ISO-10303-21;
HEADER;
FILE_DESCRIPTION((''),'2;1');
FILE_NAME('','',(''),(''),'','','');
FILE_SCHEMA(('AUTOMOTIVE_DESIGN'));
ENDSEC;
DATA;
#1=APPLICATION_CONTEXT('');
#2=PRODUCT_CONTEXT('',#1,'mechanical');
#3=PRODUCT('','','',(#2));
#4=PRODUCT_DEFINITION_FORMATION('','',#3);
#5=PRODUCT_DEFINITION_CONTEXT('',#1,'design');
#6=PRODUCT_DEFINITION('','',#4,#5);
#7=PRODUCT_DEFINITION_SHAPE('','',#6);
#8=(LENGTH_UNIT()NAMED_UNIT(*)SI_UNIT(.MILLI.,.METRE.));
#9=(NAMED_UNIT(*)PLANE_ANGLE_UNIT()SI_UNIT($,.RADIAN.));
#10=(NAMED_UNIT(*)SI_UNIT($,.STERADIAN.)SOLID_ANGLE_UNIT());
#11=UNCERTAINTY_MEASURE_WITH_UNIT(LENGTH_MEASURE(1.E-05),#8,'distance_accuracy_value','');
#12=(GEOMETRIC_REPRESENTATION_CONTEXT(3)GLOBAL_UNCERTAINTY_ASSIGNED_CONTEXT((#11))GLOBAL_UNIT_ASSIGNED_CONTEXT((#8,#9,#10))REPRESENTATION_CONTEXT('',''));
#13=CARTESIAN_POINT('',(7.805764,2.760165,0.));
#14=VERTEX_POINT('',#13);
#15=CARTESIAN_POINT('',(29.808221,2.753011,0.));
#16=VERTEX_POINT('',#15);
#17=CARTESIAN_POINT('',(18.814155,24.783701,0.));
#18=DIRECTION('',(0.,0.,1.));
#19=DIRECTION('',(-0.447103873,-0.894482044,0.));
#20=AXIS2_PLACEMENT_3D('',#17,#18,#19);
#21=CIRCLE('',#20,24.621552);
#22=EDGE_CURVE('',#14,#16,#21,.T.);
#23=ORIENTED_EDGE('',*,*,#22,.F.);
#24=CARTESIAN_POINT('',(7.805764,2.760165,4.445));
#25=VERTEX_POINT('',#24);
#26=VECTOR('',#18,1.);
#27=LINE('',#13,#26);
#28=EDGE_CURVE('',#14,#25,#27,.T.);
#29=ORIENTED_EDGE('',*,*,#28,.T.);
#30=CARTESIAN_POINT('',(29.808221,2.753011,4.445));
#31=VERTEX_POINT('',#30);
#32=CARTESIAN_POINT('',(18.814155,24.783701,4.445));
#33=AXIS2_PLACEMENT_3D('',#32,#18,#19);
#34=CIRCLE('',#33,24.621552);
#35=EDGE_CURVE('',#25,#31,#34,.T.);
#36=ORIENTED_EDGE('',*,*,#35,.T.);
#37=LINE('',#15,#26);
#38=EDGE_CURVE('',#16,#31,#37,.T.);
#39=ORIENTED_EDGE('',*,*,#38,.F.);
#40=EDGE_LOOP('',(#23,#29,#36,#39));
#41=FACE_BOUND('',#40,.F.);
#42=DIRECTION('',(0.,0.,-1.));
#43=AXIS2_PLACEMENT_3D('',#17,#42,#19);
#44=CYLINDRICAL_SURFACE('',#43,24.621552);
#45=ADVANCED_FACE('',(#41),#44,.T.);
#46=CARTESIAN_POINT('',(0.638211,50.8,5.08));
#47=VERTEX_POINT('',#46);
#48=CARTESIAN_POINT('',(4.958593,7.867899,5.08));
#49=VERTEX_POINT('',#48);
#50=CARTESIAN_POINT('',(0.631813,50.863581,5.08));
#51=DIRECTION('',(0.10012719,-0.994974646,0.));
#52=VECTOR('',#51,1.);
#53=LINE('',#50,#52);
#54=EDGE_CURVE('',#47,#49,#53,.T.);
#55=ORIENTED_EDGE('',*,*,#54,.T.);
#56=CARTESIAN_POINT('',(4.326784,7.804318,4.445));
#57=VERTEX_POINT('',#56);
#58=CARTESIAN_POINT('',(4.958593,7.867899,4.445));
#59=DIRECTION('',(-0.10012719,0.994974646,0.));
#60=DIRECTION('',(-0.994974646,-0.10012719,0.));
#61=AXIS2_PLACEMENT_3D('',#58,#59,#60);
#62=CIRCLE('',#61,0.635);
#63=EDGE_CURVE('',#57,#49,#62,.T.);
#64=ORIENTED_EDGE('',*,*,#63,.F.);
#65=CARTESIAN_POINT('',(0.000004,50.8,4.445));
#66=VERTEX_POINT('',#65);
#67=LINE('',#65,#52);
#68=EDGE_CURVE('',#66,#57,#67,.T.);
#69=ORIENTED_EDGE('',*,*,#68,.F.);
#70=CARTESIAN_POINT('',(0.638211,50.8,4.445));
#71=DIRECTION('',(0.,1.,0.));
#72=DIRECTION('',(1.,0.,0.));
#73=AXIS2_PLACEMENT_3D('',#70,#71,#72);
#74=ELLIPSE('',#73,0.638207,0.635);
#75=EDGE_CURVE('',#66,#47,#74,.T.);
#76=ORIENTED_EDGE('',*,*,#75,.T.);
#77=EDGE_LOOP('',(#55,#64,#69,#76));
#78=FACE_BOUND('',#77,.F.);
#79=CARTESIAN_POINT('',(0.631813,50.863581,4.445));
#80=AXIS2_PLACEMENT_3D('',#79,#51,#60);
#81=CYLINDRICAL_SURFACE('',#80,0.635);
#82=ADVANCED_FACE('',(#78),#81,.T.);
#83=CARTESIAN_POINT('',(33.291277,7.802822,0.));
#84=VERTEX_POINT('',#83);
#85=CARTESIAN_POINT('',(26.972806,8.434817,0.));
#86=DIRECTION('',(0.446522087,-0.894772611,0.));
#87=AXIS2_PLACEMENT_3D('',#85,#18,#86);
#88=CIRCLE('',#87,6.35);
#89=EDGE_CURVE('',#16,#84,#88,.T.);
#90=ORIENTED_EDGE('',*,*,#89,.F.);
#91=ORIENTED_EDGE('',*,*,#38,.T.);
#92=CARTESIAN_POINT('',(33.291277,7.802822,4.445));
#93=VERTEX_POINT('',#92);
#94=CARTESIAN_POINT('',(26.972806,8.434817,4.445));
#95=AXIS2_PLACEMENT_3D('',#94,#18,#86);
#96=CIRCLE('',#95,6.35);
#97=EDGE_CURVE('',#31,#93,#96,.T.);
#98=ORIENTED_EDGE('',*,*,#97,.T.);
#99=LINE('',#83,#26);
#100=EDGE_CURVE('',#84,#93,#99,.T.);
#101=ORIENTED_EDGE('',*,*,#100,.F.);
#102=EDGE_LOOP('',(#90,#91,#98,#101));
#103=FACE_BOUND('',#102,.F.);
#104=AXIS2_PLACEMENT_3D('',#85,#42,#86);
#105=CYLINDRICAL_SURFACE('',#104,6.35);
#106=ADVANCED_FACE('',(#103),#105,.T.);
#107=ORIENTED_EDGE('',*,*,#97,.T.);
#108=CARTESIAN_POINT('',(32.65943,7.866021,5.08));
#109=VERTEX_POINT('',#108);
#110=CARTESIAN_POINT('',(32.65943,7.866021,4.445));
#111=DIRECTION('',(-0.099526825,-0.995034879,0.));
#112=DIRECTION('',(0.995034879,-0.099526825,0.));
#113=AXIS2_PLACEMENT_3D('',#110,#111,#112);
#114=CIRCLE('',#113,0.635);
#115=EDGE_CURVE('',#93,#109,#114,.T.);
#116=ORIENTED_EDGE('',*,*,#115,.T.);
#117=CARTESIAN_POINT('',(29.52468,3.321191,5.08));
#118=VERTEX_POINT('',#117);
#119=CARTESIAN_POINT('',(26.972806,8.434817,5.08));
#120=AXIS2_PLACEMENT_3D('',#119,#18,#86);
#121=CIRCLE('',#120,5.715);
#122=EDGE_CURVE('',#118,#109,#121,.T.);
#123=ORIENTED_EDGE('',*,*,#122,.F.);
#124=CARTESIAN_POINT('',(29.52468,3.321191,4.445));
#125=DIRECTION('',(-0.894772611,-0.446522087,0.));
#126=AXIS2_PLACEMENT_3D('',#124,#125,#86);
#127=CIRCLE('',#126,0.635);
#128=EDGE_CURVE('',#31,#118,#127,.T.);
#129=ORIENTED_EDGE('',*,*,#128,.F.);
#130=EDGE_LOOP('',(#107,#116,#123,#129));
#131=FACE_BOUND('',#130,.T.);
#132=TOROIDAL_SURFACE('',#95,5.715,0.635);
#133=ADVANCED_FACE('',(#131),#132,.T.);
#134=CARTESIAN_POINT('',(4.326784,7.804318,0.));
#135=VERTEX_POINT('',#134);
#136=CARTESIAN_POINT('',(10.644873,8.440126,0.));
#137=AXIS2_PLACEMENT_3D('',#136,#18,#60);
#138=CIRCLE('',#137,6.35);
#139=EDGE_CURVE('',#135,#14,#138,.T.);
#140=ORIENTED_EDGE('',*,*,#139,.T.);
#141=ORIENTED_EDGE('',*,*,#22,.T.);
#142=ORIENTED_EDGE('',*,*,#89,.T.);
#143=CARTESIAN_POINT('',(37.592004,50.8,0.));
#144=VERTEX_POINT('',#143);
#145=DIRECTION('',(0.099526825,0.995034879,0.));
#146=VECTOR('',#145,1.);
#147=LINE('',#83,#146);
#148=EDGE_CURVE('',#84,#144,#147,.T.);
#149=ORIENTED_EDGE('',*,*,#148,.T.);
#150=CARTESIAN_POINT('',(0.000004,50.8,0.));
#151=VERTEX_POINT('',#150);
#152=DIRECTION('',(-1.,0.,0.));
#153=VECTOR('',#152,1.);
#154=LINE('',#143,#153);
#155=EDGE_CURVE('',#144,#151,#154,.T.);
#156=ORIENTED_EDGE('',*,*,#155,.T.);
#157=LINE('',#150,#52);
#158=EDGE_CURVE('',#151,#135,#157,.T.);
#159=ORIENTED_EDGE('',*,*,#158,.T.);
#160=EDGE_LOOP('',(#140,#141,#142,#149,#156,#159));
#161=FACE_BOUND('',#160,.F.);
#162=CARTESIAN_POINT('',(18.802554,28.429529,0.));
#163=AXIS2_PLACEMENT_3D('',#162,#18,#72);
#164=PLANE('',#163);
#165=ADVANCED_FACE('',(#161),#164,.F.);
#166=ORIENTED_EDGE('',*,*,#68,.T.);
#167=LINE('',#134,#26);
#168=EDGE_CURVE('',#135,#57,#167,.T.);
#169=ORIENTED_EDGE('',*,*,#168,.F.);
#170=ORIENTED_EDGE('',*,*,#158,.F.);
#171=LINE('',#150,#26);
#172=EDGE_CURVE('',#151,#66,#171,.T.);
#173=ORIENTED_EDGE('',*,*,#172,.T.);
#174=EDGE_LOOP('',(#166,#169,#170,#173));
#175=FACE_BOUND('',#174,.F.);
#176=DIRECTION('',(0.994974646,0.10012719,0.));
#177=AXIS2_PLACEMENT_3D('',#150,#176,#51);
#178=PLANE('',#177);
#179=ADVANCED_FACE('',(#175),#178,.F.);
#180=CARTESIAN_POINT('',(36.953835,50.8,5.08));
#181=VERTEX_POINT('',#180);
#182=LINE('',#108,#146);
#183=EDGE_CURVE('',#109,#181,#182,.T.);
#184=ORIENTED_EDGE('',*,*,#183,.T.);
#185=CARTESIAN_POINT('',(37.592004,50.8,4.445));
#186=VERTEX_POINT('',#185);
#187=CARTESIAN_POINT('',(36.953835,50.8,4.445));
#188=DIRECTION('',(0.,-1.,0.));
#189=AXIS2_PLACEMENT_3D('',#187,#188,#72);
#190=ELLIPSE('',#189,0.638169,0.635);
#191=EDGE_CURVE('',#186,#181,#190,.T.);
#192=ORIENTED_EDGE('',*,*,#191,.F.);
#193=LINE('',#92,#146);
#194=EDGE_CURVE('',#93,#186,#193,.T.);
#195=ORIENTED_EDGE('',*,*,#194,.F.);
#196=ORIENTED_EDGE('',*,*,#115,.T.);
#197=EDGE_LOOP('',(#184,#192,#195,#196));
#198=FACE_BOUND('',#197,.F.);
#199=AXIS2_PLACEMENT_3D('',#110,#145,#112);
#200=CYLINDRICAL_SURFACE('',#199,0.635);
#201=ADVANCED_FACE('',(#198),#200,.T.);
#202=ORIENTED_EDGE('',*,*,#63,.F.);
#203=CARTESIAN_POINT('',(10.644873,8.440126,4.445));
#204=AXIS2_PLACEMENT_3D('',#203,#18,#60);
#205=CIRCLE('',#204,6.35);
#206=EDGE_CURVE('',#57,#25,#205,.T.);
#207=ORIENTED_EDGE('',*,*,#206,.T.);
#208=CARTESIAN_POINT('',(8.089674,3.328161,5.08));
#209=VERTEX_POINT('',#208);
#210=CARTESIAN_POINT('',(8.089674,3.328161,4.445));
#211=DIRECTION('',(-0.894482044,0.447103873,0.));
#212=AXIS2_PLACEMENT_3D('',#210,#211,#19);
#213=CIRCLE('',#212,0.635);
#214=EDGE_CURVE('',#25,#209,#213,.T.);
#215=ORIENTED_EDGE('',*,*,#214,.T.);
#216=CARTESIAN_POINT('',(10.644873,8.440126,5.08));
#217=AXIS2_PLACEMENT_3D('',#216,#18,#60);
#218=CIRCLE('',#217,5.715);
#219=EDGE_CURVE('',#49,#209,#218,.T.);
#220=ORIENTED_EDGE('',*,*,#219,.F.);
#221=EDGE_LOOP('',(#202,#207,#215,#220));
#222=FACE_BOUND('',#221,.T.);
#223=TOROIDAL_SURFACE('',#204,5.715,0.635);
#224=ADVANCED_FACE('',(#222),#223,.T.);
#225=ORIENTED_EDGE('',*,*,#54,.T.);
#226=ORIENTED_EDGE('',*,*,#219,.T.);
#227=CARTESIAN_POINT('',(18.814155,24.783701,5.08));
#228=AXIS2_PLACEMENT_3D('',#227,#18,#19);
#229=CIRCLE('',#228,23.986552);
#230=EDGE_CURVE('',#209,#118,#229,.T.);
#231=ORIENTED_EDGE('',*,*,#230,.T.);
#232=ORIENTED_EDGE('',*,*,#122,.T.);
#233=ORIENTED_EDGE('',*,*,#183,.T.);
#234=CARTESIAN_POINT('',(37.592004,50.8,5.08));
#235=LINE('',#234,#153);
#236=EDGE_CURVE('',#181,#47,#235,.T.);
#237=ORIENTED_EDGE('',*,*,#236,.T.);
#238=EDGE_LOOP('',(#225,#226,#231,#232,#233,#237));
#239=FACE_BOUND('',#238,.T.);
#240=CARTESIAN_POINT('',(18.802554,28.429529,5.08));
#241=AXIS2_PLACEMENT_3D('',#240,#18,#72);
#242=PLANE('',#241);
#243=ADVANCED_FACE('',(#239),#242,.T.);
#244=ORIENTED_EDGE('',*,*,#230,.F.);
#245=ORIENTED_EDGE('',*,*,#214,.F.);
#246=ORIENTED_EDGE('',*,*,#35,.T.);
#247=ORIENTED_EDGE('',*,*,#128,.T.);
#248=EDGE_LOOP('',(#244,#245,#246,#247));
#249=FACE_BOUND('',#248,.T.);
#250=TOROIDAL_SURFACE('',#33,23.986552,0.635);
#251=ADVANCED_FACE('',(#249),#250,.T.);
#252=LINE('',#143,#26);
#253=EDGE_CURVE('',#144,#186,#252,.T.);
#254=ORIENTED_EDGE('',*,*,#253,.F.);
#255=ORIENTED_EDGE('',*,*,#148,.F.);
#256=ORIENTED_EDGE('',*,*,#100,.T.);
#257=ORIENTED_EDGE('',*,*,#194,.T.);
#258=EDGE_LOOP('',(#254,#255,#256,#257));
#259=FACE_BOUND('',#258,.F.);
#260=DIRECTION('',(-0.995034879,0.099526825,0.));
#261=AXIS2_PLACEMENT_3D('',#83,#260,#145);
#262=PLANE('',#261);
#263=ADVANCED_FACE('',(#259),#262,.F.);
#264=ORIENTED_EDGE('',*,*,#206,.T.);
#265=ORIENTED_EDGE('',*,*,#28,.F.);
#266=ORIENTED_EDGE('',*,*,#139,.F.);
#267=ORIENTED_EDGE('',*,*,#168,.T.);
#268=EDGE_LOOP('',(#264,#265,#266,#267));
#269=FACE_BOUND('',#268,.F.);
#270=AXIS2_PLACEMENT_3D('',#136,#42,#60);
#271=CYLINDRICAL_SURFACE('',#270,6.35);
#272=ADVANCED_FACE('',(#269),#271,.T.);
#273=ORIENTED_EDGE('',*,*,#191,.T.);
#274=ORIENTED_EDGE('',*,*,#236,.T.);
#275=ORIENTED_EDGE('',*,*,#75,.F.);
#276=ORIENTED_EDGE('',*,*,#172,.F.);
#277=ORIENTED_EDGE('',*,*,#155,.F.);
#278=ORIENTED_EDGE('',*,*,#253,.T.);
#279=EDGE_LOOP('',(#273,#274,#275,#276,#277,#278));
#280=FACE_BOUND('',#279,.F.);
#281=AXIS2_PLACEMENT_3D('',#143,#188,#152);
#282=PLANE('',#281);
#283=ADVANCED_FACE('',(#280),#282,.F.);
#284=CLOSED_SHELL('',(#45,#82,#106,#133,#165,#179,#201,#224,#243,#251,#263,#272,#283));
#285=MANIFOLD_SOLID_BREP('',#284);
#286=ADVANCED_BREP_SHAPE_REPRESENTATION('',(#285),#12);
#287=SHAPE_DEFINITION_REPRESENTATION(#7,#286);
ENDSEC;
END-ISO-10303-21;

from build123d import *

# Parameters (mm, degrees)
F1_DEPTH = 5.08
F2_R     = 0.635


# Not quite as in the source:
# - a feature names something its author has since deleted; it is built from what else it names


with BuildPart() as f1:
    # F0 (on Top) → F1 (new body)
    with BuildSketch(Plane.XY):
        with BuildLine():
            Line((3.7253e-06, 50.8), (4.3267840925, 7.8043183677))
            ThreePointArc((4.3267840925, 7.8043183677), (5.4175944315, 4.8348440923), (7.8057635016, 2.7601650422))
            ThreePointArc((7.8057635016, 2.7601650422), (18.8061487686, 0.162150538), (29.8082212267, 2.753010822))
            ThreePointArc((29.8082212267, 2.753010822), (32.2000000346, 4.8294123123), (33.2912774596, 7.8028215671))
            Line((33.2912774596, 7.8028215671), (37.5920037253, 50.8))
            Line((37.5920037253, 50.8), (3.7253e-06, 50.8))
        make_face()
    extrude(amount=F1_DEPTH)

    # F2
    f2_edges = [f1.edges().sort_by_distance(p)[0] for p in [
        (18.806149, 0.162151, 5.08),
        (32.2, 4.829412, 5.08),
        (35.441641, 29.301411, 5.08),
        (2.163394, 29.302159, 5.08),
        (5.417594, 4.834844, 5.08),
    ]]
    fillet(f2_edges, radius=F2_R)


solid = f1.part
